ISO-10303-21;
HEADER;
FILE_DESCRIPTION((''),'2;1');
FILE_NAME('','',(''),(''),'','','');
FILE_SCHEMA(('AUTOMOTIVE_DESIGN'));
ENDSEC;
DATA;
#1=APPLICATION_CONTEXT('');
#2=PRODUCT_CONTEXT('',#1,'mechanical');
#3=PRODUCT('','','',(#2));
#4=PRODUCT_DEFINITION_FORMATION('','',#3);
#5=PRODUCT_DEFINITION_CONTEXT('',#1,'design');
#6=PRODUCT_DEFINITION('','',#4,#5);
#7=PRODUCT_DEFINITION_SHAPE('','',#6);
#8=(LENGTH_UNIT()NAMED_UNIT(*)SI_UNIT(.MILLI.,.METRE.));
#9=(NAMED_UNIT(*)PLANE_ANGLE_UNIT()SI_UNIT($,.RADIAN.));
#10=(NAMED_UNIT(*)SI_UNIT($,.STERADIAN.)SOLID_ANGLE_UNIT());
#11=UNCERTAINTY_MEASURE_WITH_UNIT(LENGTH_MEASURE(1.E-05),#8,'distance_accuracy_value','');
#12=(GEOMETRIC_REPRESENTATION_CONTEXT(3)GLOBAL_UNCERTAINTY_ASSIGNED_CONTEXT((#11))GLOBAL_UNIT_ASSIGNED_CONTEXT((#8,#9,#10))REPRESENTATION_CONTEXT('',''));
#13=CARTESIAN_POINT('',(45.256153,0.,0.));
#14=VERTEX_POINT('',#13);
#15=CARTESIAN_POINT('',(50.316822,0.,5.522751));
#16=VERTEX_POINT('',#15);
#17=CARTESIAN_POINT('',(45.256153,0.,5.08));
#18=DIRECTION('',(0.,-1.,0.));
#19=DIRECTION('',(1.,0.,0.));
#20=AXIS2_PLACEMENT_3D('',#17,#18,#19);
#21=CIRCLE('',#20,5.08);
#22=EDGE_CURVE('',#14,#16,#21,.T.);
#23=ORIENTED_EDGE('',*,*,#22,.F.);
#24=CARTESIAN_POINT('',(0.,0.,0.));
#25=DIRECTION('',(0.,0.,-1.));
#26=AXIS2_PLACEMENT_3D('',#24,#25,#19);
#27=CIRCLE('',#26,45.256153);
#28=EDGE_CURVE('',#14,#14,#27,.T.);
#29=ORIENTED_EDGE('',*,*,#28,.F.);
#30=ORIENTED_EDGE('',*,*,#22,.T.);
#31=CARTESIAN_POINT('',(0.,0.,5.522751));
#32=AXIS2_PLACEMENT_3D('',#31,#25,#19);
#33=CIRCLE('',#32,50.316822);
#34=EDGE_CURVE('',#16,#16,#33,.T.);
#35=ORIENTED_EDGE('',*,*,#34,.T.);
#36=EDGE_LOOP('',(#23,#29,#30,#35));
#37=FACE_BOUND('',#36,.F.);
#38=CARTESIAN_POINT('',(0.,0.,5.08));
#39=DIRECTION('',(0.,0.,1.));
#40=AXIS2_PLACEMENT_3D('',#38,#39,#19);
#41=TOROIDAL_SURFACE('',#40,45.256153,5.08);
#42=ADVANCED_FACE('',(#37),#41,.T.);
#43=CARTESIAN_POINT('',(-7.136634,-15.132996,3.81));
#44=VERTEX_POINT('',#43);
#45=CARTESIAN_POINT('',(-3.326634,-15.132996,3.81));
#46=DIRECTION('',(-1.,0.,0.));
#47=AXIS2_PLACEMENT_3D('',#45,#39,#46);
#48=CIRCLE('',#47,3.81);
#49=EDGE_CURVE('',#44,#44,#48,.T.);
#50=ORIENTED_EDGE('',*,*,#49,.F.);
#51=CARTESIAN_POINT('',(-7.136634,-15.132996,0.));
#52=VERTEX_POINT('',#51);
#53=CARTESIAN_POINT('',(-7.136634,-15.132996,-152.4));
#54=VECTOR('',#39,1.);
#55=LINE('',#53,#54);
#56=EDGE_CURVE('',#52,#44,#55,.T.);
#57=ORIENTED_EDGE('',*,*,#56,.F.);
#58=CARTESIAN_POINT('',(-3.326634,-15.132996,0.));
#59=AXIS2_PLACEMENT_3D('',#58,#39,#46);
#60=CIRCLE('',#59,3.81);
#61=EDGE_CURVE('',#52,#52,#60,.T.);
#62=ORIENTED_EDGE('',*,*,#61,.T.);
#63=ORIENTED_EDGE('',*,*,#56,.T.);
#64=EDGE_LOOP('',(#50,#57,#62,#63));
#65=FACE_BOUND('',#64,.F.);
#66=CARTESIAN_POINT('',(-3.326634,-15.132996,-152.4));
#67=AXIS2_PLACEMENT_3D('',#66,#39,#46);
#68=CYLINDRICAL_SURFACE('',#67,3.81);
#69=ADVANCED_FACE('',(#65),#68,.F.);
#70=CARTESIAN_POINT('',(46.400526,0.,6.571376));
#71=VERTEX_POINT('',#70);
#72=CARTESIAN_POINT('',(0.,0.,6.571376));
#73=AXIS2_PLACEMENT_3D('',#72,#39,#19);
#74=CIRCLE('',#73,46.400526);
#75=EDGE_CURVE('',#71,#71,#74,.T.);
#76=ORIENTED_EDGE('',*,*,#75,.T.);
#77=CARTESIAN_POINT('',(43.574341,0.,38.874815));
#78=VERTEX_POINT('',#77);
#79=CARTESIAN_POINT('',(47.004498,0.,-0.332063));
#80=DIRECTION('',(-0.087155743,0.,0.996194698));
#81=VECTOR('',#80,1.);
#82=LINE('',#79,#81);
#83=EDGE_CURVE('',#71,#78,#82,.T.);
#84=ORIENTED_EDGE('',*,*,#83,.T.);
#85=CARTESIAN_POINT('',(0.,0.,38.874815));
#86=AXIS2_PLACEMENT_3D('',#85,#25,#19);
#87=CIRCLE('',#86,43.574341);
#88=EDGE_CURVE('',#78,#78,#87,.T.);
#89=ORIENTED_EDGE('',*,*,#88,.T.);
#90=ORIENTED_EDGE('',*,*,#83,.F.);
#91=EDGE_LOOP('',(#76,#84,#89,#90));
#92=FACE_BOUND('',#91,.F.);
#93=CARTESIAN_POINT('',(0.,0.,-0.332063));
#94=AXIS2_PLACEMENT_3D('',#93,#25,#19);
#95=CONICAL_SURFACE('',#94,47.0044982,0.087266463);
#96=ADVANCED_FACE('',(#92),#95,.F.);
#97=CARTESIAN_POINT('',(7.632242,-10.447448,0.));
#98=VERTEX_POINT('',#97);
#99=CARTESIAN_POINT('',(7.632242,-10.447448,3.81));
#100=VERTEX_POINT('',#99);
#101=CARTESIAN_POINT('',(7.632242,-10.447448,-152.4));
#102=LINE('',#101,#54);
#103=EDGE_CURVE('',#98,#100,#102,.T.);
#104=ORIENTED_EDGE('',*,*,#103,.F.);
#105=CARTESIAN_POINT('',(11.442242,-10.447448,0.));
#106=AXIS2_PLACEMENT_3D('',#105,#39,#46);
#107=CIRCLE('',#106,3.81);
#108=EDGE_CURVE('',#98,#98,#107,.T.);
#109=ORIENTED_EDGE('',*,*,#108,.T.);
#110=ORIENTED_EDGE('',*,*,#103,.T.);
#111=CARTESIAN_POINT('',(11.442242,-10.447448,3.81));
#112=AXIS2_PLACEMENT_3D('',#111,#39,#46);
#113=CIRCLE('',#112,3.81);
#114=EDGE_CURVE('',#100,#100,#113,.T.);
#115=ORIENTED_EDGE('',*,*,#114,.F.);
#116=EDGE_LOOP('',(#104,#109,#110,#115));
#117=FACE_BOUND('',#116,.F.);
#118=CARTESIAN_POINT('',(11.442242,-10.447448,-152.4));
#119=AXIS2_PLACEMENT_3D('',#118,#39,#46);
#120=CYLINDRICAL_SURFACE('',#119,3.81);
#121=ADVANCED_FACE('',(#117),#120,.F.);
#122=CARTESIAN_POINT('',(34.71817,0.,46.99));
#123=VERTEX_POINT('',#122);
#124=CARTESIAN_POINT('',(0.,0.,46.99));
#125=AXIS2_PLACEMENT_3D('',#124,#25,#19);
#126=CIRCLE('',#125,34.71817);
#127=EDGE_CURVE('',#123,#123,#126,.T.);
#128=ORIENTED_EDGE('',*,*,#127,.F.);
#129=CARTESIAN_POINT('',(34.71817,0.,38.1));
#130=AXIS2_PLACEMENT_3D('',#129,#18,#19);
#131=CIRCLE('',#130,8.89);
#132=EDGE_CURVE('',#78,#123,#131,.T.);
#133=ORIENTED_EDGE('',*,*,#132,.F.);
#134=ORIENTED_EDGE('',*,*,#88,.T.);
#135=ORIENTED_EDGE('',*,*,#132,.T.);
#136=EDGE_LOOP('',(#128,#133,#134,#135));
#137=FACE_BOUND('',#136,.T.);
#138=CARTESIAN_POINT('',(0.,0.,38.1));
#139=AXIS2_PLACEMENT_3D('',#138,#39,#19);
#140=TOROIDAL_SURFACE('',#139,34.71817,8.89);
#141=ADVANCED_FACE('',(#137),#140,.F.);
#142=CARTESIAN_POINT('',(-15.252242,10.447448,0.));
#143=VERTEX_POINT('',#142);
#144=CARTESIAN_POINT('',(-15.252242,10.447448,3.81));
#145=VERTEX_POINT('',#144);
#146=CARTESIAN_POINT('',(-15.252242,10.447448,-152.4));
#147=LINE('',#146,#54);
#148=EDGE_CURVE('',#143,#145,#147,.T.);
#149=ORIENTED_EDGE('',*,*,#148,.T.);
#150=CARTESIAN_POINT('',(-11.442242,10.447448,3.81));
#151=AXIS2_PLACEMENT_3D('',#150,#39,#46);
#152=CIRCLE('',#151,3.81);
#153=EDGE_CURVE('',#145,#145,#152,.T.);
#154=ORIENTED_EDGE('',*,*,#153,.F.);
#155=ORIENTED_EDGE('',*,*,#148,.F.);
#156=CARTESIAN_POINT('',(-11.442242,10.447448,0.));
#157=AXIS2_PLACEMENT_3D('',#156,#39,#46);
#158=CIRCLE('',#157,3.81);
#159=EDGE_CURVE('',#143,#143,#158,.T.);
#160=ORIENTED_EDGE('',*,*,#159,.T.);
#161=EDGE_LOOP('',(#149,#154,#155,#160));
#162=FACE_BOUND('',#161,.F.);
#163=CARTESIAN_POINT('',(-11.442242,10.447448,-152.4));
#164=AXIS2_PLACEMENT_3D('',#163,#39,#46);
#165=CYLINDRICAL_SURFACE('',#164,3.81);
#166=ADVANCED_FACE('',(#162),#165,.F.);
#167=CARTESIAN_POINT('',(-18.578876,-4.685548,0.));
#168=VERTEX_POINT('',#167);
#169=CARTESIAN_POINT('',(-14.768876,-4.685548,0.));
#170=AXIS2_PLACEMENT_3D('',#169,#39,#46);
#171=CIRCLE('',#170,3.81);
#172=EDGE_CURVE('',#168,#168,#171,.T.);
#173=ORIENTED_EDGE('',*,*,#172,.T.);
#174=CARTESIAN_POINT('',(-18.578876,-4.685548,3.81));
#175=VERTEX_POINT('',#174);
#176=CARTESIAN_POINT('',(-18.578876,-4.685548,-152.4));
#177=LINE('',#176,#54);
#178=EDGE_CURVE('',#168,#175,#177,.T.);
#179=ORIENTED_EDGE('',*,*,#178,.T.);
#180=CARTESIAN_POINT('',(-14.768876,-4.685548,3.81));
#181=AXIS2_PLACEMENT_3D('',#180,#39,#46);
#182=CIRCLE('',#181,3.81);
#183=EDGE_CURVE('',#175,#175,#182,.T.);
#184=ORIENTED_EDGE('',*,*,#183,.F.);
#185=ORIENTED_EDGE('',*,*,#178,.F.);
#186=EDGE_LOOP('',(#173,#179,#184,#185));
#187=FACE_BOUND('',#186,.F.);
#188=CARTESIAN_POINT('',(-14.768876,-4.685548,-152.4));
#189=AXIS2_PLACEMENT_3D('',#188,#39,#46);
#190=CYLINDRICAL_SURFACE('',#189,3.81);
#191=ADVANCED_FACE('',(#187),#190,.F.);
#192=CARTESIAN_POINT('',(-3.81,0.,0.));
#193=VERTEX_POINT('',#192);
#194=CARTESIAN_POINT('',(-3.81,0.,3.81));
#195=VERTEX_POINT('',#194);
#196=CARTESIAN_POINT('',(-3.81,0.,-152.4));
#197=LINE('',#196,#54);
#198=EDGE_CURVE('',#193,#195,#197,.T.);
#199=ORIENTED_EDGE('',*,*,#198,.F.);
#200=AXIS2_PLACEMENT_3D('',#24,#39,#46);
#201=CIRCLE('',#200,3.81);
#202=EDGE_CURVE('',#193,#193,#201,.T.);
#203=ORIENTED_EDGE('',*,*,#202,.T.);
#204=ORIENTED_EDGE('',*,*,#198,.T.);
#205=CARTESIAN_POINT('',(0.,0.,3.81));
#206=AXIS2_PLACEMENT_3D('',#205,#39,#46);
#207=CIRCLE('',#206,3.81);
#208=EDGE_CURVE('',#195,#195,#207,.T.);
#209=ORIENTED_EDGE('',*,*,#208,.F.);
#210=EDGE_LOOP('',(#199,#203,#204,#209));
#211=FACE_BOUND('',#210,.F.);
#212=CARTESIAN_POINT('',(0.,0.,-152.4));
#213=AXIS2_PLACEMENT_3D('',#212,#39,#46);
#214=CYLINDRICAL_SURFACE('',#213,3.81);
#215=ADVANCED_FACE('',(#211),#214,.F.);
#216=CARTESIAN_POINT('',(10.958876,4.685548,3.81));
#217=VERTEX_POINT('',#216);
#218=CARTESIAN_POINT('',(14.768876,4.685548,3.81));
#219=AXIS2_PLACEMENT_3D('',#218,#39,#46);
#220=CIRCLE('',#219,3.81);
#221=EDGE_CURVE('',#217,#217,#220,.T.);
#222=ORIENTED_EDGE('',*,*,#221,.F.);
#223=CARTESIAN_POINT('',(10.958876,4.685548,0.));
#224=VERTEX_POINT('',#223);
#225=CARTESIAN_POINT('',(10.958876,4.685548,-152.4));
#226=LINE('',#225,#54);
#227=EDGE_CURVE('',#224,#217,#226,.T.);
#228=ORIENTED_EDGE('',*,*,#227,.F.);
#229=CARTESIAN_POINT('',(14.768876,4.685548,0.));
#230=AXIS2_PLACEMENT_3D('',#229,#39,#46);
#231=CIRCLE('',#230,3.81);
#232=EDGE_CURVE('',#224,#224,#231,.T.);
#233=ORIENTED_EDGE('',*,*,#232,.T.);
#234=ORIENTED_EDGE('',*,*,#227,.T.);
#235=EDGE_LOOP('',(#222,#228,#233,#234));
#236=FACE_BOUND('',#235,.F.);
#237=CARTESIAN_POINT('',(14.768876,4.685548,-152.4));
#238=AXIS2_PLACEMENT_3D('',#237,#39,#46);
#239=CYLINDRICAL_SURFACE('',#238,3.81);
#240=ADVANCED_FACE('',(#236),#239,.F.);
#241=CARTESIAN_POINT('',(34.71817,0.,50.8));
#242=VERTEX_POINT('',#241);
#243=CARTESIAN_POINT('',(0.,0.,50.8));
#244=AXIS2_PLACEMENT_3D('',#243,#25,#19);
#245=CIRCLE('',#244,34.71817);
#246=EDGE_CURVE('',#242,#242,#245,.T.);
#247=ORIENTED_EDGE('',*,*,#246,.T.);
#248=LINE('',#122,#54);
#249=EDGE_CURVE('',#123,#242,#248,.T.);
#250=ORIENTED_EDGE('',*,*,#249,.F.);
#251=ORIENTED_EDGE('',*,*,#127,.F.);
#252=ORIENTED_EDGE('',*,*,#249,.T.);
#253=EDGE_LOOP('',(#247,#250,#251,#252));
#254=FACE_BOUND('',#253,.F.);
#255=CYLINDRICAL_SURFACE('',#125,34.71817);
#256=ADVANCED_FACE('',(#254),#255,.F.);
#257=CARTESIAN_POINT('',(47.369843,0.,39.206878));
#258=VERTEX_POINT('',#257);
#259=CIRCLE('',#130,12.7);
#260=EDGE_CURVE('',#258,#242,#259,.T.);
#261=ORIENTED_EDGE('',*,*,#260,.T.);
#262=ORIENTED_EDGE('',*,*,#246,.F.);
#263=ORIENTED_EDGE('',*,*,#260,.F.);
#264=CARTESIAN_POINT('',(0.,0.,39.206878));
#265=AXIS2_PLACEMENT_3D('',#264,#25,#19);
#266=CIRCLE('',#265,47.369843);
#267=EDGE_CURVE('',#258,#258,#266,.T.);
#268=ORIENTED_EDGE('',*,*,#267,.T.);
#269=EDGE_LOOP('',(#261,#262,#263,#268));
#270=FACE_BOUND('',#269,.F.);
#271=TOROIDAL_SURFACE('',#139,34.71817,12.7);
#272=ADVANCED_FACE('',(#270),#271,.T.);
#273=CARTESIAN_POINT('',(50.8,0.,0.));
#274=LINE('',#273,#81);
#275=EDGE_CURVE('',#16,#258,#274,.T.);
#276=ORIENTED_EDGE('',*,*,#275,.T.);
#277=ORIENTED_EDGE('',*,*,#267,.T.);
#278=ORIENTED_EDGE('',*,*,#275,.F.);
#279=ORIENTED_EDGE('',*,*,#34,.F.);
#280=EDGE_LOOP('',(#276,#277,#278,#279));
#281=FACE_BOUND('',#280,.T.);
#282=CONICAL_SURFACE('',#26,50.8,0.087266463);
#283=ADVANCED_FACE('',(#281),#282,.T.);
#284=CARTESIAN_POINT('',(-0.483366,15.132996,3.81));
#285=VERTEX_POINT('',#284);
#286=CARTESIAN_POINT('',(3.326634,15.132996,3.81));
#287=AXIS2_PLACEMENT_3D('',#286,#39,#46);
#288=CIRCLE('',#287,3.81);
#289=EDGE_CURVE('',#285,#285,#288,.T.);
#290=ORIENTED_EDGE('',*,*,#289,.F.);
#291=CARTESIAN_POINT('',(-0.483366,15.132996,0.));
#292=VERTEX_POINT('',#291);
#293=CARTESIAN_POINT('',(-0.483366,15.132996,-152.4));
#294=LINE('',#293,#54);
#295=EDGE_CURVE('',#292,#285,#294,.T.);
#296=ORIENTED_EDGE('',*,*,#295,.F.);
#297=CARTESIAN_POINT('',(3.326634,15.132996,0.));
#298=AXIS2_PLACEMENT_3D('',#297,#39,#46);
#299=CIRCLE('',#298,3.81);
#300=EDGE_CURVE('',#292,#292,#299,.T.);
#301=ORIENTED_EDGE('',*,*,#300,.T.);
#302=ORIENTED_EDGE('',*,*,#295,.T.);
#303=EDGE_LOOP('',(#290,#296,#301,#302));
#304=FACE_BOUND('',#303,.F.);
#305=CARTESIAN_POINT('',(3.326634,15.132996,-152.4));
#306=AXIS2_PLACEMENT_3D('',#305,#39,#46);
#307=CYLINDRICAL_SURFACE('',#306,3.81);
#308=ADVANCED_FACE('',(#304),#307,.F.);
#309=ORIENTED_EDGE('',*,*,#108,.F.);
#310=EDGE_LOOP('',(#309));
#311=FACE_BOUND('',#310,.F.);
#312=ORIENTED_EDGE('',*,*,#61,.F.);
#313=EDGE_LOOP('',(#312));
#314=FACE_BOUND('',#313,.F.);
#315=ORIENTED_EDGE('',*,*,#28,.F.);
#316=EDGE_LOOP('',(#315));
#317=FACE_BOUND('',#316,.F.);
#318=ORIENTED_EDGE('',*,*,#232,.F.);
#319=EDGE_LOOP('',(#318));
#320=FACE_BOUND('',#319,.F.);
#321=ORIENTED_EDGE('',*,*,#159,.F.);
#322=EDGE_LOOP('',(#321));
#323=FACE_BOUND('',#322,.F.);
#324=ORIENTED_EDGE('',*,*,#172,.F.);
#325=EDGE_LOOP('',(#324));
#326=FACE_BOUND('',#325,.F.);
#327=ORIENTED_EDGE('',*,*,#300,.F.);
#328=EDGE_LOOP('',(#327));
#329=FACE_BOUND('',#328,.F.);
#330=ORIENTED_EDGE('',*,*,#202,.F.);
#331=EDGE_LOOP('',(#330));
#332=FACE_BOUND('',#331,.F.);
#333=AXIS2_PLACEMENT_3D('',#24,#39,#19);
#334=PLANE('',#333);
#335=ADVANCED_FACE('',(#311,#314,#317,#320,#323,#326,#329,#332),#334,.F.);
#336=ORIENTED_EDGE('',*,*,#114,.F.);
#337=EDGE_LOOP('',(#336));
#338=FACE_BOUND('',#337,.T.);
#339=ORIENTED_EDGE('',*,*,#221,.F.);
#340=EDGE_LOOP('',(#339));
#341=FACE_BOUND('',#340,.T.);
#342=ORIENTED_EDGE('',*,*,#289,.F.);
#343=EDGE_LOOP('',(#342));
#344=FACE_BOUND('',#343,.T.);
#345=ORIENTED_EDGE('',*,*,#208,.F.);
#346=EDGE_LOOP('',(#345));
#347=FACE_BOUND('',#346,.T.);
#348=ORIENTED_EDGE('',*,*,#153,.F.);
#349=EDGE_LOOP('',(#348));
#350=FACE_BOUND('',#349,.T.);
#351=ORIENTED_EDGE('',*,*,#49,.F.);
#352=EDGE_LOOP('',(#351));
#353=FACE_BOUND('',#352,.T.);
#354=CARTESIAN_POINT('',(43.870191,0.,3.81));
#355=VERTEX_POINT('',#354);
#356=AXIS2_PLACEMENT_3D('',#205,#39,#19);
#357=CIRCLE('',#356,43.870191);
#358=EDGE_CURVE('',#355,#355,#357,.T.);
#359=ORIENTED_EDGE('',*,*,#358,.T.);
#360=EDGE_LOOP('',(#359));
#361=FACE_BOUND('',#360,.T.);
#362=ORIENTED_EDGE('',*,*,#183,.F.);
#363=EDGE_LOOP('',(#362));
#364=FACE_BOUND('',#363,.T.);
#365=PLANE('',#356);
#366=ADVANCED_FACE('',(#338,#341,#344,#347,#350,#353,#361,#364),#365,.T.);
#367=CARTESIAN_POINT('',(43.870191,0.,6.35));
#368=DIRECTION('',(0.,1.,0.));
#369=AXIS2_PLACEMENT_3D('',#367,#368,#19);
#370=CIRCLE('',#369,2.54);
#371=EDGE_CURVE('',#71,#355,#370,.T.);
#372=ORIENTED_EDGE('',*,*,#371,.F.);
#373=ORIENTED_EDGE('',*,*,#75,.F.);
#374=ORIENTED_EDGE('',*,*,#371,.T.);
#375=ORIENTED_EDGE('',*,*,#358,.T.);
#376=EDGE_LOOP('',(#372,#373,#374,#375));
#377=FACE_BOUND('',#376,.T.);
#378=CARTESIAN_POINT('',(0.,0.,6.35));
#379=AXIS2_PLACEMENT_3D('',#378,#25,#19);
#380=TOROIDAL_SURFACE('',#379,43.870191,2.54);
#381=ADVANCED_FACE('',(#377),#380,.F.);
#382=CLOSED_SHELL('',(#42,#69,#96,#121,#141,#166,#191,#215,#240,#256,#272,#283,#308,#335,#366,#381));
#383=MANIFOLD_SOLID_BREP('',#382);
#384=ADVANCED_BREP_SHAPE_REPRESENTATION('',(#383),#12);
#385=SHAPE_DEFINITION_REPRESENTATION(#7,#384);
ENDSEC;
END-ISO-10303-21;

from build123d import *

# Parameters (mm, degrees)
F0_R     = 50.8
F1_DEPTH = 50.8
F1_TAPER = 5
F2_R     = 12.7
F3_T     = -3.81
F4_R     = 2.54
F6_D     = 7.62
F7_R     = 5.08


# Not quite as in the source:
# - a shell that OpenCascade refuses in one call is made with other operations: the cavity is built on its own and cut out


with BuildPart() as f1:
    # F0 (on Top) → F1 (new body)
    with BuildSketch(Plane.XY):
        Circle(F0_R)
    extrude(amount=F1_DEPTH, taper=F1_TAPER)

    # F2
    f2_edges = [f1.edges().sort_by_distance(p)[0] for p in [
        (-46.355576, 0, 50.8),
    ]]
    fillet(f2_edges, radius=F2_R)

    # F3: a shell. OpenCascade refuses it in one call, so the cavity is built on its own and cut out:
    # the body offset inwards by the wall thickness, plus a prism from it out through each open face.
    f3_core = offset(f1.part, amount=F3_T, mode=Mode.PRIVATE)
    f3_exits = [f3_core.faces().sort_by_distance(p)[0] for p in [
        (0, 0, 46.99),
    ]]
    add(f3_core, mode=Mode.SUBTRACT)
    extrude(f3_exits, amount=-F3_T, mode=Mode.SUBTRACT)

    # F4
    f4_edges = [f1.edges().sort_by_distance(p)[0] for p in [
        (-46.642115, 0, 3.81),
    ]]
    fillet(f4_edges, radius=F4_R)

    # F6 (through all)
    with Locations(Plane(origin=(0, 0, 0), x_dir=(1, 0, 0), z_dir=(0, 0, -1))):
        with Locations((3.3266340716, -15.1329960019), (-11.4422419373, -10.4474476161), (-14.7688760089, 4.6855483859), (-3.3266340716, 15.1329960019), (11.4422419373, 10.4474476161), (14.7688760089, -4.6855483859), (0, 0)):
            Hole(F6_D / 2)

    # F7
    f7_edges = [f1.edges().sort_by_distance(p)[0] for p in [
        (-50.8, 0, 0),
    ]]
    fillet(f7_edges, radius=F7_R)


solid = f1.part
